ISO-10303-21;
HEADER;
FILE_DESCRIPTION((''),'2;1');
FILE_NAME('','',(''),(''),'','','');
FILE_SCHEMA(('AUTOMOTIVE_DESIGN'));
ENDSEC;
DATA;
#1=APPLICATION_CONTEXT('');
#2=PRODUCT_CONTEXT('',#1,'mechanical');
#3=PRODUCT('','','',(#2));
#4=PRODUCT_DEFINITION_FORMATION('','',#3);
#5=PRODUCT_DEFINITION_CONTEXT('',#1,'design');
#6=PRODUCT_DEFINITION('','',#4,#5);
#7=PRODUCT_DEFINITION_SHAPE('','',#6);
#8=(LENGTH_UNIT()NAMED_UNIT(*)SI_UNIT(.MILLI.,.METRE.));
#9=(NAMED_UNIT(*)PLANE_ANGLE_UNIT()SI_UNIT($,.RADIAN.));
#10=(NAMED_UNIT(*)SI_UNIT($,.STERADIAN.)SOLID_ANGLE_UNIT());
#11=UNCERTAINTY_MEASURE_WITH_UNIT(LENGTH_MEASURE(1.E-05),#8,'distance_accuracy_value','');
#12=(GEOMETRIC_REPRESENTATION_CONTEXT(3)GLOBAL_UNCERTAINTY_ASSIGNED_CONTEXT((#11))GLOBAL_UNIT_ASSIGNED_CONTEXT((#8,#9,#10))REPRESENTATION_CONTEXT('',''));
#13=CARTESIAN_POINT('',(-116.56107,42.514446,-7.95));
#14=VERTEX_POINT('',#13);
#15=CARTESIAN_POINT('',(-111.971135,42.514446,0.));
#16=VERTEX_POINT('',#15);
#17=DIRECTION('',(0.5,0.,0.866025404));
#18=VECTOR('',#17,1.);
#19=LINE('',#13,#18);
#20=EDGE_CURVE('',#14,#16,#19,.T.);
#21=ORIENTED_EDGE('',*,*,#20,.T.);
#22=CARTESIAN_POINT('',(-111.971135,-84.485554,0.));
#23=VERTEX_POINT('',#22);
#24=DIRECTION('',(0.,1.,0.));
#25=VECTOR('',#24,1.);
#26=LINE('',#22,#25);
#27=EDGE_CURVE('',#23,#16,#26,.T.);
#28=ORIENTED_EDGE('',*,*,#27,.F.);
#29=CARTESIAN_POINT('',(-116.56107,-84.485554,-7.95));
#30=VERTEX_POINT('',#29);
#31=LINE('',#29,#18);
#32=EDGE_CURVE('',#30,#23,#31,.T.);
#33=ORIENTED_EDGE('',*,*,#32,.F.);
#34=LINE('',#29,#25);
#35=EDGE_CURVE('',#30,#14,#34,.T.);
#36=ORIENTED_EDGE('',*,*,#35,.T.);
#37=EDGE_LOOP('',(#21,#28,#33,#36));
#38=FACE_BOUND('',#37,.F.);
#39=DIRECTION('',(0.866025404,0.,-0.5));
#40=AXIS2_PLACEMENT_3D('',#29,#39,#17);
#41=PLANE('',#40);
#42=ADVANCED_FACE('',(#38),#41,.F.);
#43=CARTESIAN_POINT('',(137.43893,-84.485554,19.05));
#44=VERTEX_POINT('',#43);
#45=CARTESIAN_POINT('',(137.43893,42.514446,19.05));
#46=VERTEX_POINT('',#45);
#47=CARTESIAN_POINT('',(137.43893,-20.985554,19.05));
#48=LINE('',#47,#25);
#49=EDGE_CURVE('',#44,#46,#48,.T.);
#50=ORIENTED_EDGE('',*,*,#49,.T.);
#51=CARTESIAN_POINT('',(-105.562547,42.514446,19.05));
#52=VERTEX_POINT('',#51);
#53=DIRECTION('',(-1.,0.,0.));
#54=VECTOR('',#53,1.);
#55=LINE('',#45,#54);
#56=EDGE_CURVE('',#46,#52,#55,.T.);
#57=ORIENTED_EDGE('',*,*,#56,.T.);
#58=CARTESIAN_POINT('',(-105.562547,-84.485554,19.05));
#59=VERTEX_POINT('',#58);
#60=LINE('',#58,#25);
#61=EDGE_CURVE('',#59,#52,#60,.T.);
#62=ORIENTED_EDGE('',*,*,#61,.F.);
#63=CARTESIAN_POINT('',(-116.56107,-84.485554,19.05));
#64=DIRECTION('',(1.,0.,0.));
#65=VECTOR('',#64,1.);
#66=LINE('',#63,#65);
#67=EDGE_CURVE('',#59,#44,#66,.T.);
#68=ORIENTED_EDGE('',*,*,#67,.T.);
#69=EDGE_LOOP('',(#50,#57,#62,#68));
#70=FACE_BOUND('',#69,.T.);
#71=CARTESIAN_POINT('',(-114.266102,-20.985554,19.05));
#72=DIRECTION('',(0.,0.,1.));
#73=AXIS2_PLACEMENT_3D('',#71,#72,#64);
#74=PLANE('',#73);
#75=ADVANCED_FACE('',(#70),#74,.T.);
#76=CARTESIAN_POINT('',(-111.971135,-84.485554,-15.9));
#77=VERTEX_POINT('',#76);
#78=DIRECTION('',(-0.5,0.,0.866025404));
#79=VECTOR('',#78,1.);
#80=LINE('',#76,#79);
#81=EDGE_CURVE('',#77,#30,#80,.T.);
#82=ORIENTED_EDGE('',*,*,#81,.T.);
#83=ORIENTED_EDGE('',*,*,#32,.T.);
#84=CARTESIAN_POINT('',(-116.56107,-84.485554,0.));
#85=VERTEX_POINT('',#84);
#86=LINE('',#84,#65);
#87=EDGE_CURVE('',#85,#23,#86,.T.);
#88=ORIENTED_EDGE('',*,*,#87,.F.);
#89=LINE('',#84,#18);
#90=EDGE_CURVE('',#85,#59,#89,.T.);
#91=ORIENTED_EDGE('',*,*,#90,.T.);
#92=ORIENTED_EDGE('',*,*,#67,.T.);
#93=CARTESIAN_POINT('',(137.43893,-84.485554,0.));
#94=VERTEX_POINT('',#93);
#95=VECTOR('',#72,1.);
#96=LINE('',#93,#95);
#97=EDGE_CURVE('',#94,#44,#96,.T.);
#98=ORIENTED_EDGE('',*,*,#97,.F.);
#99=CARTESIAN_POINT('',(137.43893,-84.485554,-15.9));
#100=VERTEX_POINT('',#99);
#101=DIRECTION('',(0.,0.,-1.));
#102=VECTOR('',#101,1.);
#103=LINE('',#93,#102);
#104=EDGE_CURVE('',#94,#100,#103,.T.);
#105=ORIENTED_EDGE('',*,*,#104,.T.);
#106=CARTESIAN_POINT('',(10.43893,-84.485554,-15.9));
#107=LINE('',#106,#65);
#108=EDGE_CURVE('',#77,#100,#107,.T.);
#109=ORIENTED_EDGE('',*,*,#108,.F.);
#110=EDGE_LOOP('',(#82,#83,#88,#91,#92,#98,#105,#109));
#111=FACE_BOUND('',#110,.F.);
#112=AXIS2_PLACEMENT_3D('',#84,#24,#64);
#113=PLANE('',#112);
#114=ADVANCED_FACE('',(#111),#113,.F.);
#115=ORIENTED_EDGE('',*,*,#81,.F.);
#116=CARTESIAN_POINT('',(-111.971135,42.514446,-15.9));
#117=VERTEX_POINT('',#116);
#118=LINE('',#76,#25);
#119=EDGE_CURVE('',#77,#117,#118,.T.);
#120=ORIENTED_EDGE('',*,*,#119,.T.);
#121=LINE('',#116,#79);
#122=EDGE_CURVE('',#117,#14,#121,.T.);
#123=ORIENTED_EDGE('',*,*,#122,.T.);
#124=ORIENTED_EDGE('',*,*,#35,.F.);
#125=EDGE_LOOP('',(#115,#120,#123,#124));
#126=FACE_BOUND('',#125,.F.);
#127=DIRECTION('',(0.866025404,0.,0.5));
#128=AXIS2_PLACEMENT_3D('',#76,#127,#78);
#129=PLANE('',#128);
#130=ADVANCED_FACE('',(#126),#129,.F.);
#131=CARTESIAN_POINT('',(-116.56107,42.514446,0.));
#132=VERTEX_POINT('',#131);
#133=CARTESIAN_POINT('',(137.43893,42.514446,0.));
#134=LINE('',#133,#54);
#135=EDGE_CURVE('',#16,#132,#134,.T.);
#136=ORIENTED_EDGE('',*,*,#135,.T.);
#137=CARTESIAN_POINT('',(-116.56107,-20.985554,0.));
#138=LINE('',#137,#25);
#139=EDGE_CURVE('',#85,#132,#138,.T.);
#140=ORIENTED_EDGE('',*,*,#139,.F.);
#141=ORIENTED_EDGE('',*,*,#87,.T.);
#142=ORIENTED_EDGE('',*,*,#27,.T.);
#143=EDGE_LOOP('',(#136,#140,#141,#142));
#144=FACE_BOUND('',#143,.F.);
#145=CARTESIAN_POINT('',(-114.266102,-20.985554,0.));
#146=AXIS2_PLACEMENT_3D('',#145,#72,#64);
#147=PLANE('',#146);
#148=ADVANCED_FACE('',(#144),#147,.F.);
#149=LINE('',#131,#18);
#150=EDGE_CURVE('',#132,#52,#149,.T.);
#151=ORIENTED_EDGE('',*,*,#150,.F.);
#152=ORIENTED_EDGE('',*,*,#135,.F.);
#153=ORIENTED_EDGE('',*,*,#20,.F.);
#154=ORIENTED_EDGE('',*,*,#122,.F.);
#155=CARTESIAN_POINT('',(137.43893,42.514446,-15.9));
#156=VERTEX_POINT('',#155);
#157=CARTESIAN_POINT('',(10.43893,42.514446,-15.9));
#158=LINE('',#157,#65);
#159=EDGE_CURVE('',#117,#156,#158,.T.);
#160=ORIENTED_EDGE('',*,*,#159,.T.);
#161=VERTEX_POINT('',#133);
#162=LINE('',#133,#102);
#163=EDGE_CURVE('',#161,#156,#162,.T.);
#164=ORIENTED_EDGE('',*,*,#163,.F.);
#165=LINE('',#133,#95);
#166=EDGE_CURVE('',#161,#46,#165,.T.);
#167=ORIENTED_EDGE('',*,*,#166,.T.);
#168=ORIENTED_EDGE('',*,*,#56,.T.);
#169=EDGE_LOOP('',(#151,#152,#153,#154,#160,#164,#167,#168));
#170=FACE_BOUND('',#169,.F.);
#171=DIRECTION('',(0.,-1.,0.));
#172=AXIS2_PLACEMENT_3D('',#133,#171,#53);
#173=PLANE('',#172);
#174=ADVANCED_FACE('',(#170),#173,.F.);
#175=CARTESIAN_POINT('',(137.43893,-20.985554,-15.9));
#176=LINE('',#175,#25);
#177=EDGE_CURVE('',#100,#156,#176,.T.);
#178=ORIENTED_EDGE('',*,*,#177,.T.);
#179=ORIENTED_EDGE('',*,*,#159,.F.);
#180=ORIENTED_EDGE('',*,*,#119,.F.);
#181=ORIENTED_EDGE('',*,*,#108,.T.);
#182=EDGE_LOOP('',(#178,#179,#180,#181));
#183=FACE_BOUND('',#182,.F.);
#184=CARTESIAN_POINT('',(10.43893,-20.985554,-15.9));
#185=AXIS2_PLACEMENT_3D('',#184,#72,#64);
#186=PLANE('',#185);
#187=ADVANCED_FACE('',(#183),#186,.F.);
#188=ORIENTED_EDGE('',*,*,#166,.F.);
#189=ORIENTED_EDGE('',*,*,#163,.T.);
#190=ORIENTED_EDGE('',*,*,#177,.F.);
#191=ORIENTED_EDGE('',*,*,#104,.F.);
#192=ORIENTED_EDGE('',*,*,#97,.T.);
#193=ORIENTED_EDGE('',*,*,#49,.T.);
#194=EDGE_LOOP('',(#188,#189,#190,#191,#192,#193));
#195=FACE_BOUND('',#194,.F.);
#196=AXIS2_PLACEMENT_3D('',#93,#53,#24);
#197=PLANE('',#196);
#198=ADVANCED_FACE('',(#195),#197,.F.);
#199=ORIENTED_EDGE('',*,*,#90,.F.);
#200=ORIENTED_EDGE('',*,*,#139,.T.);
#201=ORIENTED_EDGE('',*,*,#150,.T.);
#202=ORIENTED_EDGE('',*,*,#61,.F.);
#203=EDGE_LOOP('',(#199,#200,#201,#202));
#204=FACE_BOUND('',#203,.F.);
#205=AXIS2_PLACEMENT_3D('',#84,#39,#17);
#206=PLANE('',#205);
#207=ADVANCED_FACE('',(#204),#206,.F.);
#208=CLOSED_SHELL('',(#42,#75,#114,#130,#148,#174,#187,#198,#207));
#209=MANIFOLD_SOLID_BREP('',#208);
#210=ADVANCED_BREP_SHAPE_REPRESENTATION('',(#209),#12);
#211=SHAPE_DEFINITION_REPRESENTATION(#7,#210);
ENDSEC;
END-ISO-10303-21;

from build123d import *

# Parameters (mm, degrees)
F0_W     = 254
F0_H     = 127
F1_DEPTH = 15.9
F3_DEPTH = 127
F4_W     = 4.5899346401
F4_H     = 127
F4_W_2   = 249.4100653599
F5_DEPTH = 19.05
F7_DEPTH = 127


# Not quite as in the source:
# - the program builds the solid bodies; features that only make, move or delete a surface that nothing else refers to are left out


with BuildPart() as f1:
    # F0 (on Top) → F1 (new body)
    with BuildSketch(Plane.XY):
        with Locations((10.4389302433, -20.9855538282)):
            Rectangle(F0_W, F0_H)
    extrude(amount=-F1_DEPTH)

    # F2 (on face) → F3 (cut)
    with BuildSketch(Plane.XZ.offset(84.4855538282)):
        Polygon((-116.5610697567, 0), (-116.5610697567, -7.95), (-111.9711351167, 0), align=None)
        Polygon((-111.9711351167, -15.9), (-116.5610697567, -7.95), (-116.5610697567, -15.9), align=None)
    extrude(amount=-F3_DEPTH, mode=Mode.SUBTRACT)

    # F4 (on face) → F5 (join)
    with BuildSketch(Plane.XY):
        with Locations((-114.2661024367, -20.9855538282)):
            Rectangle(F4_W, F4_H)
        with Locations((12.7338975633, -20.9855538282)):
            Rectangle(F4_W_2, F4_H)
    extrude(amount=F5_DEPTH)

    # F6 (on face) → F7 (cut)
    with BuildSketch(Plane.XZ.offset(84.4855538282)):
        Polygon((-116.5610697567, 19.05), (-116.5610697567, 0), (-105.5625471287, 19.05), align=None)
    extrude(amount=-F7_DEPTH, mode=Mode.SUBTRACT)


solid = f1.part
